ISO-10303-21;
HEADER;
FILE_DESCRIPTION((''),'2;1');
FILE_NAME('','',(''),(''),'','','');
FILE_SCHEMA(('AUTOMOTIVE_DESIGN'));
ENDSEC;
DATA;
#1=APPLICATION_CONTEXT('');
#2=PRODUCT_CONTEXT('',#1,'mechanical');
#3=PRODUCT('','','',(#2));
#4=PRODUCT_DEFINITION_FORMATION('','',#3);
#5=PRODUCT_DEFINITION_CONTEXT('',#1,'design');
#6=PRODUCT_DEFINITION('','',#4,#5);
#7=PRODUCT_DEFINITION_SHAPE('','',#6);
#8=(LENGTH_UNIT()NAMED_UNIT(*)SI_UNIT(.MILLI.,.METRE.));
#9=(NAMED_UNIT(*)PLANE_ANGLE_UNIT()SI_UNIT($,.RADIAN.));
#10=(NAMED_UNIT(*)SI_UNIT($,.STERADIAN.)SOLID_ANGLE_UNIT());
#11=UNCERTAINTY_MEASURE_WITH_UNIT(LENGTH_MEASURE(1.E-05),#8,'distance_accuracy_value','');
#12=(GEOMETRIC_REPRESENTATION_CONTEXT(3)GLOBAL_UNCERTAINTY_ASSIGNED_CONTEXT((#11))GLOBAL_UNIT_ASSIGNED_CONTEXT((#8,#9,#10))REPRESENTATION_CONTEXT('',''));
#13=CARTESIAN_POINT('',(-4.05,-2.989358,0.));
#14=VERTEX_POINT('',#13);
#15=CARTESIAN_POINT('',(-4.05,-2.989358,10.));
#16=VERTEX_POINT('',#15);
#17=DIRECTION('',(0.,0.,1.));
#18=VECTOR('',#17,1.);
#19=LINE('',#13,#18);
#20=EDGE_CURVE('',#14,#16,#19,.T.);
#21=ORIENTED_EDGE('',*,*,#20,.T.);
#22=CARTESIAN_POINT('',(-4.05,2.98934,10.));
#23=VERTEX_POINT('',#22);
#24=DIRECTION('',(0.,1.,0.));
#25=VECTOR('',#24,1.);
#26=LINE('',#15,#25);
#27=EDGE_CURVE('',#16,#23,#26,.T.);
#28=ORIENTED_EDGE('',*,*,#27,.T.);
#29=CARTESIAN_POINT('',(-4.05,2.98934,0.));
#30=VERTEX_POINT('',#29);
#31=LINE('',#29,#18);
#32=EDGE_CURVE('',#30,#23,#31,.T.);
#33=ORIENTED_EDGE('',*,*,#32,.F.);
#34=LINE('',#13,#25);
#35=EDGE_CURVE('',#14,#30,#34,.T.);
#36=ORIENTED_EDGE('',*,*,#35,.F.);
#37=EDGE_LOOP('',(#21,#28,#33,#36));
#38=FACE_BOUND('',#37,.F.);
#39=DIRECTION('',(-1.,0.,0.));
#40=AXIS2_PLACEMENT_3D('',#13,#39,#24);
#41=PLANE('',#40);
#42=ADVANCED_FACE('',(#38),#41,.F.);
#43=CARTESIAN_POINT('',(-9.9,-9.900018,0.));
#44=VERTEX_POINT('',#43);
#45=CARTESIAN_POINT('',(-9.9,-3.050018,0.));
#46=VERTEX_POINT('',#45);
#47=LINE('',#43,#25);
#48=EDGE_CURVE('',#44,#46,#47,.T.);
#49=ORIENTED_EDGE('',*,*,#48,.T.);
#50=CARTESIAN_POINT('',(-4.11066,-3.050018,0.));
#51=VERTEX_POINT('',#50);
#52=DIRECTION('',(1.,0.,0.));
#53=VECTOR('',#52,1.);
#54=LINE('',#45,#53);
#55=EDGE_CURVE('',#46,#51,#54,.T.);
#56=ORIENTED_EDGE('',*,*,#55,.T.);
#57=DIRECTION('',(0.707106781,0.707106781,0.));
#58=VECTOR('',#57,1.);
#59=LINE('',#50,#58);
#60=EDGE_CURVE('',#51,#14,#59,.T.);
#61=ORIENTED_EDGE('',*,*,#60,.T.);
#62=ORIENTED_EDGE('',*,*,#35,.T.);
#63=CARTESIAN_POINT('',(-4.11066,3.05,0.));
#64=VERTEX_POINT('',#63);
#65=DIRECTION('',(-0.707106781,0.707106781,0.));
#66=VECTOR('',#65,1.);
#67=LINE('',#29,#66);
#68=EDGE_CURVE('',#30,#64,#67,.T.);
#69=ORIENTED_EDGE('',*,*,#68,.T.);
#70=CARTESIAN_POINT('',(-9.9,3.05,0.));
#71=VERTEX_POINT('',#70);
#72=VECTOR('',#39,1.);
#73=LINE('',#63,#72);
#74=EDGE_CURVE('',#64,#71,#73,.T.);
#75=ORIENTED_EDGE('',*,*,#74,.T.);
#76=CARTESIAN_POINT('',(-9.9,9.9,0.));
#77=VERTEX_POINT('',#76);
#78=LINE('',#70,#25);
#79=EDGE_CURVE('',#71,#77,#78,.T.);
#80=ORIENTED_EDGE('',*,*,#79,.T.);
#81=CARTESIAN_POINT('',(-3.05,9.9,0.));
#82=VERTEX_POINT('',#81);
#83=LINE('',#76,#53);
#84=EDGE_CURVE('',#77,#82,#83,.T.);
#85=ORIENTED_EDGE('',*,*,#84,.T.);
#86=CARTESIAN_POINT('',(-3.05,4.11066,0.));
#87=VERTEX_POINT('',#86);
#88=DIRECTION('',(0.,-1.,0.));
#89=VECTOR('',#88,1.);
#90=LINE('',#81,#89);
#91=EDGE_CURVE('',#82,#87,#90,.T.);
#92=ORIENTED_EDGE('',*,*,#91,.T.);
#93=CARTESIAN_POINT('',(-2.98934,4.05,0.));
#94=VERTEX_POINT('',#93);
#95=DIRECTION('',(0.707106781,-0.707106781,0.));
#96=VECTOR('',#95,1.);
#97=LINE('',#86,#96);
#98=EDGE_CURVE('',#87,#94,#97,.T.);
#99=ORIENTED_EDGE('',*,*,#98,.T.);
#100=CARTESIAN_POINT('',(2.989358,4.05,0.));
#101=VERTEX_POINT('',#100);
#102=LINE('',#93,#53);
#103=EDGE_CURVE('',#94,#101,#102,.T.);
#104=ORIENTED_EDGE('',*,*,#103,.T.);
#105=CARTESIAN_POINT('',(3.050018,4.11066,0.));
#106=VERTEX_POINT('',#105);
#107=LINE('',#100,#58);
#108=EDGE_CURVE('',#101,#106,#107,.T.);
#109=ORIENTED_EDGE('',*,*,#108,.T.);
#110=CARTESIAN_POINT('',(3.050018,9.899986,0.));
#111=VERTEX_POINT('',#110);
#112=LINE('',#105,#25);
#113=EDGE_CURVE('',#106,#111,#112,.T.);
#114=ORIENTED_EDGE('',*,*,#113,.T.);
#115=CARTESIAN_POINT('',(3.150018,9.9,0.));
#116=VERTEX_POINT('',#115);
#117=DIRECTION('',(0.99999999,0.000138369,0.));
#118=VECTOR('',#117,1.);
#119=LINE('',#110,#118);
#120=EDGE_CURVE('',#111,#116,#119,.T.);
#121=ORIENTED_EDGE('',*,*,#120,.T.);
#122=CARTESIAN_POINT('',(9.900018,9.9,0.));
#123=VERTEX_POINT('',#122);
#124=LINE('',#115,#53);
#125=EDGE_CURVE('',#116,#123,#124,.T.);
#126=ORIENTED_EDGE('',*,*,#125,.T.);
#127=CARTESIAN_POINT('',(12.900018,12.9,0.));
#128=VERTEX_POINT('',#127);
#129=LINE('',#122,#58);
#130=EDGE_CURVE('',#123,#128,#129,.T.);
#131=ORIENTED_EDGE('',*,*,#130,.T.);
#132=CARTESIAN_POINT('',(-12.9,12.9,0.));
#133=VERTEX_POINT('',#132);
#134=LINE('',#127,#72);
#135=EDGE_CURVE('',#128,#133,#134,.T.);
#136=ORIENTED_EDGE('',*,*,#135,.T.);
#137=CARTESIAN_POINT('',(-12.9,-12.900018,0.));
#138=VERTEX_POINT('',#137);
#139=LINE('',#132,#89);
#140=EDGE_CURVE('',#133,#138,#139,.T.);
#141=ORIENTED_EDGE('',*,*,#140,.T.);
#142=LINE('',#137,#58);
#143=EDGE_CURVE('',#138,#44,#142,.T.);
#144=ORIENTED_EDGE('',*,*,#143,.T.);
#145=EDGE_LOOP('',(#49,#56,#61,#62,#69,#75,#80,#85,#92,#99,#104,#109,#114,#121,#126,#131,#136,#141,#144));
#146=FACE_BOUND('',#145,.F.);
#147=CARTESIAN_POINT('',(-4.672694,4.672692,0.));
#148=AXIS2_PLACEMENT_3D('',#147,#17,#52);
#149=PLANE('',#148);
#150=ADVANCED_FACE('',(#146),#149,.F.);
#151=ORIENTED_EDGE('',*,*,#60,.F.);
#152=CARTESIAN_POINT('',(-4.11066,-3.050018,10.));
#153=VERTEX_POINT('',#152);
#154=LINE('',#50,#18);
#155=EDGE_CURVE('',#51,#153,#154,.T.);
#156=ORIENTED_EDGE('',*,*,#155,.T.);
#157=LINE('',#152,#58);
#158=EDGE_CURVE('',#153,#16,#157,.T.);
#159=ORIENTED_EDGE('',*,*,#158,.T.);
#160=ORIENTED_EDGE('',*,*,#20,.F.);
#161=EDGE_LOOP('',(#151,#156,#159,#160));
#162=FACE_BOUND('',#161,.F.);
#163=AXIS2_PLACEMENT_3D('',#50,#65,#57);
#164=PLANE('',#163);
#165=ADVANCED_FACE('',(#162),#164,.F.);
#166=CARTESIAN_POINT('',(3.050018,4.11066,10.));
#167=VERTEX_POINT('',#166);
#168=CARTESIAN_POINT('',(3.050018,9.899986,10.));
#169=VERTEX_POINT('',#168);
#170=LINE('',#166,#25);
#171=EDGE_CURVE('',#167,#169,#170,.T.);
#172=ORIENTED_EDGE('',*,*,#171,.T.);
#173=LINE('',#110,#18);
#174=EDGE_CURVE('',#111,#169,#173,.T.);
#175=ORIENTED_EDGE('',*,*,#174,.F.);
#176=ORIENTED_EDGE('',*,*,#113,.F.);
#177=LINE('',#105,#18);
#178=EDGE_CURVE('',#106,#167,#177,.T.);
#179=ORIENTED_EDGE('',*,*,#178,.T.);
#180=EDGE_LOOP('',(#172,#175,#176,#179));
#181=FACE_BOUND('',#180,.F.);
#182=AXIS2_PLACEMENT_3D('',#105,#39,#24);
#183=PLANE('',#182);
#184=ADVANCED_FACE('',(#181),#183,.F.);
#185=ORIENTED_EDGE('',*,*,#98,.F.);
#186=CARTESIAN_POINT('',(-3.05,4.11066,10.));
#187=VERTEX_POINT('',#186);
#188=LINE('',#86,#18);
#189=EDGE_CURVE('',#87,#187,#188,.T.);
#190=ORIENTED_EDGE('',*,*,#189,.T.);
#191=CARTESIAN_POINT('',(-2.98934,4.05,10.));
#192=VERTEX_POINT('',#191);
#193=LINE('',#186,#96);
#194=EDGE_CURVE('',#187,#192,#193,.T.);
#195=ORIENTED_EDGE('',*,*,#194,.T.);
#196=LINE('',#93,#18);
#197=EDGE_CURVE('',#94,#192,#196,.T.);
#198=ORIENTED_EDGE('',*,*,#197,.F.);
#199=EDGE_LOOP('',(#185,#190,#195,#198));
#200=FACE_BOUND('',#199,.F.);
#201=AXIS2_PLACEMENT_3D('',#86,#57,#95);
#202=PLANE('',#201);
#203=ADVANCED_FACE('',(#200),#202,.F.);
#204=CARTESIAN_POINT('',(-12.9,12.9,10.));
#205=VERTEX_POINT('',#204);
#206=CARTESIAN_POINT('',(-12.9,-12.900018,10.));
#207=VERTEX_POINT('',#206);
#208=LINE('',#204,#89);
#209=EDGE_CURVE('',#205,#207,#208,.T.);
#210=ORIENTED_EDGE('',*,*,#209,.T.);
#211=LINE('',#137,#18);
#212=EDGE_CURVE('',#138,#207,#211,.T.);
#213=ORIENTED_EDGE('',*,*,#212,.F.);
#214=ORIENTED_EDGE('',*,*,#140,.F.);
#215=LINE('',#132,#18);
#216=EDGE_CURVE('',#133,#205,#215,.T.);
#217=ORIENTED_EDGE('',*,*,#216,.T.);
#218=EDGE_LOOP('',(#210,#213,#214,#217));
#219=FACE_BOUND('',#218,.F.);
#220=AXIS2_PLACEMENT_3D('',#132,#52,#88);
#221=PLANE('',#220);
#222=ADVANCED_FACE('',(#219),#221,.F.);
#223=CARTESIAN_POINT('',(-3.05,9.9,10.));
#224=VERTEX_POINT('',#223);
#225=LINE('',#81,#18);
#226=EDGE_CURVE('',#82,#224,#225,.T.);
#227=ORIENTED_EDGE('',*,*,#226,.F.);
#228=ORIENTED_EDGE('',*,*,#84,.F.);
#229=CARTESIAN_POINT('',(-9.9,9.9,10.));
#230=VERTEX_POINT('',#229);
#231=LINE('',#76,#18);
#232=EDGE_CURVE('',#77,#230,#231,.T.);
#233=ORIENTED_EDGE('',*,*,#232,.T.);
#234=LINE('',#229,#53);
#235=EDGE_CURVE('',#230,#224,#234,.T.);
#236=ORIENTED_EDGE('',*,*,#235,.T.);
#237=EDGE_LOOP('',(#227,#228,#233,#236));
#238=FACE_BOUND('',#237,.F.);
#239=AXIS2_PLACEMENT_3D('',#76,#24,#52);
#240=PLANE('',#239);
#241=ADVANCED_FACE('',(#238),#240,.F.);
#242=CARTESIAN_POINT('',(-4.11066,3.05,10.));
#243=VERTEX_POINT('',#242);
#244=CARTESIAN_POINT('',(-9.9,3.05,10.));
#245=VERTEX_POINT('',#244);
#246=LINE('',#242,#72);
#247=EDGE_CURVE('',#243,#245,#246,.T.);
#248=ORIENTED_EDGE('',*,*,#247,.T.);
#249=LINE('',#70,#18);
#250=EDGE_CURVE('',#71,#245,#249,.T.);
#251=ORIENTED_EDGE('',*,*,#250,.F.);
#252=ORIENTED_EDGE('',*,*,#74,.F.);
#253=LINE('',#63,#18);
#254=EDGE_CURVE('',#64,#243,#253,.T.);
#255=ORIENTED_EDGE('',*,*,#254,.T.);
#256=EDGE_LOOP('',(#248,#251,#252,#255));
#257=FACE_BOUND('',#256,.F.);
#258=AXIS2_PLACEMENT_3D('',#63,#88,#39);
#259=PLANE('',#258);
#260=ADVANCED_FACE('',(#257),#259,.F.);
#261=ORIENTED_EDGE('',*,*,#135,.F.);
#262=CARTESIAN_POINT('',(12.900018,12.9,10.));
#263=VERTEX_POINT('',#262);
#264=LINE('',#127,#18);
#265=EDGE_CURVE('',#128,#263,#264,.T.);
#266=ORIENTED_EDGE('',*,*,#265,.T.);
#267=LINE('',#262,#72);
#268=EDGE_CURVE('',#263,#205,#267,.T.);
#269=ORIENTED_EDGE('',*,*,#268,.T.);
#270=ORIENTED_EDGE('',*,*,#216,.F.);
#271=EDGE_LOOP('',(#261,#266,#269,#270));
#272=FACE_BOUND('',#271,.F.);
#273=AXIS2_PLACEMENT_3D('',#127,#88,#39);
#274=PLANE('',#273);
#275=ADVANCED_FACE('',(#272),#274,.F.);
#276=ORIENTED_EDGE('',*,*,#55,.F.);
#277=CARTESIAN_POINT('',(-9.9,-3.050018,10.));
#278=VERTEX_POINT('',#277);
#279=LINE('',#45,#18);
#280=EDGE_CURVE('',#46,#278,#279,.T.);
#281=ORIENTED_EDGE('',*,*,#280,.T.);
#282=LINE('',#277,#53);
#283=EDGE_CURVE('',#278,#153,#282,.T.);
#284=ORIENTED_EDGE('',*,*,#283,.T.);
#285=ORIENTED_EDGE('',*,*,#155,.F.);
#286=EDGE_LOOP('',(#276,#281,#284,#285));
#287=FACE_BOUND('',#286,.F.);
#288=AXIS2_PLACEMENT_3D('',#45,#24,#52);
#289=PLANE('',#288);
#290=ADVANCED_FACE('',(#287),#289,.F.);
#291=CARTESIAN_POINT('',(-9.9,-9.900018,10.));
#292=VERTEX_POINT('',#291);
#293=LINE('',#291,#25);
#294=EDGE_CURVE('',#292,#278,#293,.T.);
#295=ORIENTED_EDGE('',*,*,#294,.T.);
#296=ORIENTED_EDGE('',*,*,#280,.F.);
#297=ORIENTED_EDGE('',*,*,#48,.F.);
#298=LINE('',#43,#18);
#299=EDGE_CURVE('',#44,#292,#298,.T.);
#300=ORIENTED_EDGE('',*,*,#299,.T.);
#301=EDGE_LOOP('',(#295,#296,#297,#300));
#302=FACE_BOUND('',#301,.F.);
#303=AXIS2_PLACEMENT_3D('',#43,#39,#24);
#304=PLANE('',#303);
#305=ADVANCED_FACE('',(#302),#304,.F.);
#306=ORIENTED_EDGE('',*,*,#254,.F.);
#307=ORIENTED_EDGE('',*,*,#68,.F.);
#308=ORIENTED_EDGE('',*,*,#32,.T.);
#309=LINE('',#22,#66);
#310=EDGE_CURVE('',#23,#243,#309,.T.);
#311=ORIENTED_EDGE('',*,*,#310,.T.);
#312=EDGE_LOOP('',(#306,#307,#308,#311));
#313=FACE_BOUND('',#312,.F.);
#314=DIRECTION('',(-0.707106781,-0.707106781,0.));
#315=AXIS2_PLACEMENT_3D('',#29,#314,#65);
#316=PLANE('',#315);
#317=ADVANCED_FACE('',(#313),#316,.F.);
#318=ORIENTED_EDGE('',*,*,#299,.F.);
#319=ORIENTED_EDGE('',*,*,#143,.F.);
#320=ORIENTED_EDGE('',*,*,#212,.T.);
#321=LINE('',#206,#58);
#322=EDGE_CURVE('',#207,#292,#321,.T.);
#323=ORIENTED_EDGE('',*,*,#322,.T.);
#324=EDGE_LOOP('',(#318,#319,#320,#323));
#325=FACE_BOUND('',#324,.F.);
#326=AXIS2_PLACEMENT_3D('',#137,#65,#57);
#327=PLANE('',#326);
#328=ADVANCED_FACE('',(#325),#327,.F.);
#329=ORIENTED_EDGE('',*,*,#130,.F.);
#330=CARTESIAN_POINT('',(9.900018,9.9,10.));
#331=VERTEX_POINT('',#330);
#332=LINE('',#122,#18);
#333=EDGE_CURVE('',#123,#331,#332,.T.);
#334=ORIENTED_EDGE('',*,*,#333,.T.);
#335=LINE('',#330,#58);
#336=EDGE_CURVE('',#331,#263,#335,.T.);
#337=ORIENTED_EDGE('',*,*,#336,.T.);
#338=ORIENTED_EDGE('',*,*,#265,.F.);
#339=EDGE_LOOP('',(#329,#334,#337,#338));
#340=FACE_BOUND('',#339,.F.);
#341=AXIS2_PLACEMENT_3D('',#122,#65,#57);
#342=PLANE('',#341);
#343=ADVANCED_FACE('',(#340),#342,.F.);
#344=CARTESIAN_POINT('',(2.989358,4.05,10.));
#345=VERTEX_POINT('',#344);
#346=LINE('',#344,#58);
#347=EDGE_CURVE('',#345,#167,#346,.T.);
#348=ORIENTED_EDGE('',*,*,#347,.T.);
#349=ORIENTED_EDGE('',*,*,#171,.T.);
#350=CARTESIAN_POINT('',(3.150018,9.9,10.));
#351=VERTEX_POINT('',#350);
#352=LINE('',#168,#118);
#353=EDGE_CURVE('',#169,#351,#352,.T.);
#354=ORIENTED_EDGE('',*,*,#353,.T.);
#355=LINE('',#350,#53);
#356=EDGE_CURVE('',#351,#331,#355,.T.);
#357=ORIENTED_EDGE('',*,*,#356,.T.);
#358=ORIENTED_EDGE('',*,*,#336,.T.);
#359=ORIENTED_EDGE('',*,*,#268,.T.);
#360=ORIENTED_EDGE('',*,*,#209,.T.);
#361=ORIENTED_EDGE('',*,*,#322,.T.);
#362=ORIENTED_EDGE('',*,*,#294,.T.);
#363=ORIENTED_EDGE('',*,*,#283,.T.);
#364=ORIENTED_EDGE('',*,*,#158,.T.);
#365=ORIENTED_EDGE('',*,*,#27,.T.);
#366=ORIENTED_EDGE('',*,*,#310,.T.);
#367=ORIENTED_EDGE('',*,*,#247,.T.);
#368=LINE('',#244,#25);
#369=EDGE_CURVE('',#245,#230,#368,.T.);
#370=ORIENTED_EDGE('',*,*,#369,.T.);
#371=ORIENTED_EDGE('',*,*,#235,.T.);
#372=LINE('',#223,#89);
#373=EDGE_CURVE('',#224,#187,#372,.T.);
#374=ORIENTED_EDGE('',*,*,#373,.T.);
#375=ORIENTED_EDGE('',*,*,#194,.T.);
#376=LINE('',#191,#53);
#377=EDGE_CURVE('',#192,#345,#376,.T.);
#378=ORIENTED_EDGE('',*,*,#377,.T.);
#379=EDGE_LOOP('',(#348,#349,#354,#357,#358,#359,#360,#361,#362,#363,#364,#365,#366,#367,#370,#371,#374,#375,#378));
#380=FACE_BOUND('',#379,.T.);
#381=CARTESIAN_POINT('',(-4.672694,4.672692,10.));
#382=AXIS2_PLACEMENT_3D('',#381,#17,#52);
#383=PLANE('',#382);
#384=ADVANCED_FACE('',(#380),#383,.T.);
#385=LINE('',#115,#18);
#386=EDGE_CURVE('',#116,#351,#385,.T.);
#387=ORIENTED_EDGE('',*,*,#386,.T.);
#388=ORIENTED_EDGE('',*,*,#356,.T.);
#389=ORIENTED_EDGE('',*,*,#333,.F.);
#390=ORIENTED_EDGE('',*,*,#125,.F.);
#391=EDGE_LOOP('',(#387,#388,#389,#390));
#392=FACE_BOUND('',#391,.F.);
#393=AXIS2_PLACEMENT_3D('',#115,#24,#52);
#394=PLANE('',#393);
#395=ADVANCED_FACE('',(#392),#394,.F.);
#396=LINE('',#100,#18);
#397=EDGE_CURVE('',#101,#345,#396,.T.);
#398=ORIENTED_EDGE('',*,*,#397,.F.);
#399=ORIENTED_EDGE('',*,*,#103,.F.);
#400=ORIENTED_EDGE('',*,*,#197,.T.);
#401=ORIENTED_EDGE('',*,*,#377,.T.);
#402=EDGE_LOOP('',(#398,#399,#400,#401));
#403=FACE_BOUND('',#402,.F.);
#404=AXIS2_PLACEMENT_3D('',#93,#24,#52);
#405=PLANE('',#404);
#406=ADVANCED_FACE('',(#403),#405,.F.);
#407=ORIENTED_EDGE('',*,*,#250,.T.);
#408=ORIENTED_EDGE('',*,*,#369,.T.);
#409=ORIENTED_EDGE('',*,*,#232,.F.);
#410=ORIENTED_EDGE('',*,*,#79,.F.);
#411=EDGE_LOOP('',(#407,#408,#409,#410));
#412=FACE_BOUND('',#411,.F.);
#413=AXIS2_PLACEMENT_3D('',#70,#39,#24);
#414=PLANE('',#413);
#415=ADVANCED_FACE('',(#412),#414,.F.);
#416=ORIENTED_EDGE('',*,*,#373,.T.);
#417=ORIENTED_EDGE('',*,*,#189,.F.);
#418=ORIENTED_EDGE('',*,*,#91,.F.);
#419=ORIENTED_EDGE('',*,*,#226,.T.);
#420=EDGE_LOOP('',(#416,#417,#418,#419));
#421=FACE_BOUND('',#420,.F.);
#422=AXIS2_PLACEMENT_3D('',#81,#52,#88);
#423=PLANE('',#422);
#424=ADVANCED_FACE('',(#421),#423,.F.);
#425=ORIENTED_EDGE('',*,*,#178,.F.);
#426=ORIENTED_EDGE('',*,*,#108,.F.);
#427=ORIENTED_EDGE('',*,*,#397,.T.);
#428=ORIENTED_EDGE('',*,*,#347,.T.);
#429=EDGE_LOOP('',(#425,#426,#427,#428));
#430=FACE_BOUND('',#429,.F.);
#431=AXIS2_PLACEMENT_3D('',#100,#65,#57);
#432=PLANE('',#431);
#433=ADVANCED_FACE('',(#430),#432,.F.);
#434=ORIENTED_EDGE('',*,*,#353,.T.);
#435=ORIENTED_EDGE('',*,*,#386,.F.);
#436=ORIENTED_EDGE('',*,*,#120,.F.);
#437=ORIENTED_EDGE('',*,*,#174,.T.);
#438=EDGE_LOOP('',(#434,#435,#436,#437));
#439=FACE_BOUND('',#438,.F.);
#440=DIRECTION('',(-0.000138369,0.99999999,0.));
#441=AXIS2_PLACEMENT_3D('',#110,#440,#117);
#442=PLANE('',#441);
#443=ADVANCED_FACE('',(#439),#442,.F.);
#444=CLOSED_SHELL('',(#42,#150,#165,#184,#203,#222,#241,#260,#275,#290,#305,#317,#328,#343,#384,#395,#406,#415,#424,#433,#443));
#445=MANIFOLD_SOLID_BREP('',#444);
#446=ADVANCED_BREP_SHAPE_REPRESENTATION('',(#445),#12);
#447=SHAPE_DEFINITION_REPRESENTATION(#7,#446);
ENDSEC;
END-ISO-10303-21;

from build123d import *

# Parameters (mm, degrees)
F1_DEPTH = 10


# Not quite as in the source:
# - ends of sketch curves that miss each other by under 0.0002 mm in the source are joined


with BuildPart() as f1:
    # F0 (on Top) → F1 (new body)
    with BuildSketch(Plane.XY):
        Polygon((-9.9, 9.9), (-3.15, 9.9), (-3.05, 9.9), (-3.05, 8), (-3.05, 4.1106601718), (-2.9893398282, 4.05), (0, 4.05), (2.9893580109, 4.05), (3.0500181827, 4.1106601718), (3.0500181827, 7.9999861631), (3.0500181827, 9.8999861631), (3.1500181827, 9.9), (9.9000181827, 9.9), (12.9000181827, 12.9), (1.81827e-05, 12.9), (-12.9, 12.9), (-12.9, 0), (-12.9, -12.9000181827), (-9.9, -9.9000181827), (-9.9, -3.1500181827), (-9.9, -3.0500181827), (-7.999823753, -3.0500181827), (-4.1106601718, -3.0500181827), (-4.05, -2.9893580109), (-4.05, -3.36409e-05), (-4.05, 2.9893398282), (-4.1106601718, 3.05), (-8, 3.05), (-9.9, 3.05), (-9.9, 3.15), align=None)
    extrude(amount=F1_DEPTH)


solid = f1.part
